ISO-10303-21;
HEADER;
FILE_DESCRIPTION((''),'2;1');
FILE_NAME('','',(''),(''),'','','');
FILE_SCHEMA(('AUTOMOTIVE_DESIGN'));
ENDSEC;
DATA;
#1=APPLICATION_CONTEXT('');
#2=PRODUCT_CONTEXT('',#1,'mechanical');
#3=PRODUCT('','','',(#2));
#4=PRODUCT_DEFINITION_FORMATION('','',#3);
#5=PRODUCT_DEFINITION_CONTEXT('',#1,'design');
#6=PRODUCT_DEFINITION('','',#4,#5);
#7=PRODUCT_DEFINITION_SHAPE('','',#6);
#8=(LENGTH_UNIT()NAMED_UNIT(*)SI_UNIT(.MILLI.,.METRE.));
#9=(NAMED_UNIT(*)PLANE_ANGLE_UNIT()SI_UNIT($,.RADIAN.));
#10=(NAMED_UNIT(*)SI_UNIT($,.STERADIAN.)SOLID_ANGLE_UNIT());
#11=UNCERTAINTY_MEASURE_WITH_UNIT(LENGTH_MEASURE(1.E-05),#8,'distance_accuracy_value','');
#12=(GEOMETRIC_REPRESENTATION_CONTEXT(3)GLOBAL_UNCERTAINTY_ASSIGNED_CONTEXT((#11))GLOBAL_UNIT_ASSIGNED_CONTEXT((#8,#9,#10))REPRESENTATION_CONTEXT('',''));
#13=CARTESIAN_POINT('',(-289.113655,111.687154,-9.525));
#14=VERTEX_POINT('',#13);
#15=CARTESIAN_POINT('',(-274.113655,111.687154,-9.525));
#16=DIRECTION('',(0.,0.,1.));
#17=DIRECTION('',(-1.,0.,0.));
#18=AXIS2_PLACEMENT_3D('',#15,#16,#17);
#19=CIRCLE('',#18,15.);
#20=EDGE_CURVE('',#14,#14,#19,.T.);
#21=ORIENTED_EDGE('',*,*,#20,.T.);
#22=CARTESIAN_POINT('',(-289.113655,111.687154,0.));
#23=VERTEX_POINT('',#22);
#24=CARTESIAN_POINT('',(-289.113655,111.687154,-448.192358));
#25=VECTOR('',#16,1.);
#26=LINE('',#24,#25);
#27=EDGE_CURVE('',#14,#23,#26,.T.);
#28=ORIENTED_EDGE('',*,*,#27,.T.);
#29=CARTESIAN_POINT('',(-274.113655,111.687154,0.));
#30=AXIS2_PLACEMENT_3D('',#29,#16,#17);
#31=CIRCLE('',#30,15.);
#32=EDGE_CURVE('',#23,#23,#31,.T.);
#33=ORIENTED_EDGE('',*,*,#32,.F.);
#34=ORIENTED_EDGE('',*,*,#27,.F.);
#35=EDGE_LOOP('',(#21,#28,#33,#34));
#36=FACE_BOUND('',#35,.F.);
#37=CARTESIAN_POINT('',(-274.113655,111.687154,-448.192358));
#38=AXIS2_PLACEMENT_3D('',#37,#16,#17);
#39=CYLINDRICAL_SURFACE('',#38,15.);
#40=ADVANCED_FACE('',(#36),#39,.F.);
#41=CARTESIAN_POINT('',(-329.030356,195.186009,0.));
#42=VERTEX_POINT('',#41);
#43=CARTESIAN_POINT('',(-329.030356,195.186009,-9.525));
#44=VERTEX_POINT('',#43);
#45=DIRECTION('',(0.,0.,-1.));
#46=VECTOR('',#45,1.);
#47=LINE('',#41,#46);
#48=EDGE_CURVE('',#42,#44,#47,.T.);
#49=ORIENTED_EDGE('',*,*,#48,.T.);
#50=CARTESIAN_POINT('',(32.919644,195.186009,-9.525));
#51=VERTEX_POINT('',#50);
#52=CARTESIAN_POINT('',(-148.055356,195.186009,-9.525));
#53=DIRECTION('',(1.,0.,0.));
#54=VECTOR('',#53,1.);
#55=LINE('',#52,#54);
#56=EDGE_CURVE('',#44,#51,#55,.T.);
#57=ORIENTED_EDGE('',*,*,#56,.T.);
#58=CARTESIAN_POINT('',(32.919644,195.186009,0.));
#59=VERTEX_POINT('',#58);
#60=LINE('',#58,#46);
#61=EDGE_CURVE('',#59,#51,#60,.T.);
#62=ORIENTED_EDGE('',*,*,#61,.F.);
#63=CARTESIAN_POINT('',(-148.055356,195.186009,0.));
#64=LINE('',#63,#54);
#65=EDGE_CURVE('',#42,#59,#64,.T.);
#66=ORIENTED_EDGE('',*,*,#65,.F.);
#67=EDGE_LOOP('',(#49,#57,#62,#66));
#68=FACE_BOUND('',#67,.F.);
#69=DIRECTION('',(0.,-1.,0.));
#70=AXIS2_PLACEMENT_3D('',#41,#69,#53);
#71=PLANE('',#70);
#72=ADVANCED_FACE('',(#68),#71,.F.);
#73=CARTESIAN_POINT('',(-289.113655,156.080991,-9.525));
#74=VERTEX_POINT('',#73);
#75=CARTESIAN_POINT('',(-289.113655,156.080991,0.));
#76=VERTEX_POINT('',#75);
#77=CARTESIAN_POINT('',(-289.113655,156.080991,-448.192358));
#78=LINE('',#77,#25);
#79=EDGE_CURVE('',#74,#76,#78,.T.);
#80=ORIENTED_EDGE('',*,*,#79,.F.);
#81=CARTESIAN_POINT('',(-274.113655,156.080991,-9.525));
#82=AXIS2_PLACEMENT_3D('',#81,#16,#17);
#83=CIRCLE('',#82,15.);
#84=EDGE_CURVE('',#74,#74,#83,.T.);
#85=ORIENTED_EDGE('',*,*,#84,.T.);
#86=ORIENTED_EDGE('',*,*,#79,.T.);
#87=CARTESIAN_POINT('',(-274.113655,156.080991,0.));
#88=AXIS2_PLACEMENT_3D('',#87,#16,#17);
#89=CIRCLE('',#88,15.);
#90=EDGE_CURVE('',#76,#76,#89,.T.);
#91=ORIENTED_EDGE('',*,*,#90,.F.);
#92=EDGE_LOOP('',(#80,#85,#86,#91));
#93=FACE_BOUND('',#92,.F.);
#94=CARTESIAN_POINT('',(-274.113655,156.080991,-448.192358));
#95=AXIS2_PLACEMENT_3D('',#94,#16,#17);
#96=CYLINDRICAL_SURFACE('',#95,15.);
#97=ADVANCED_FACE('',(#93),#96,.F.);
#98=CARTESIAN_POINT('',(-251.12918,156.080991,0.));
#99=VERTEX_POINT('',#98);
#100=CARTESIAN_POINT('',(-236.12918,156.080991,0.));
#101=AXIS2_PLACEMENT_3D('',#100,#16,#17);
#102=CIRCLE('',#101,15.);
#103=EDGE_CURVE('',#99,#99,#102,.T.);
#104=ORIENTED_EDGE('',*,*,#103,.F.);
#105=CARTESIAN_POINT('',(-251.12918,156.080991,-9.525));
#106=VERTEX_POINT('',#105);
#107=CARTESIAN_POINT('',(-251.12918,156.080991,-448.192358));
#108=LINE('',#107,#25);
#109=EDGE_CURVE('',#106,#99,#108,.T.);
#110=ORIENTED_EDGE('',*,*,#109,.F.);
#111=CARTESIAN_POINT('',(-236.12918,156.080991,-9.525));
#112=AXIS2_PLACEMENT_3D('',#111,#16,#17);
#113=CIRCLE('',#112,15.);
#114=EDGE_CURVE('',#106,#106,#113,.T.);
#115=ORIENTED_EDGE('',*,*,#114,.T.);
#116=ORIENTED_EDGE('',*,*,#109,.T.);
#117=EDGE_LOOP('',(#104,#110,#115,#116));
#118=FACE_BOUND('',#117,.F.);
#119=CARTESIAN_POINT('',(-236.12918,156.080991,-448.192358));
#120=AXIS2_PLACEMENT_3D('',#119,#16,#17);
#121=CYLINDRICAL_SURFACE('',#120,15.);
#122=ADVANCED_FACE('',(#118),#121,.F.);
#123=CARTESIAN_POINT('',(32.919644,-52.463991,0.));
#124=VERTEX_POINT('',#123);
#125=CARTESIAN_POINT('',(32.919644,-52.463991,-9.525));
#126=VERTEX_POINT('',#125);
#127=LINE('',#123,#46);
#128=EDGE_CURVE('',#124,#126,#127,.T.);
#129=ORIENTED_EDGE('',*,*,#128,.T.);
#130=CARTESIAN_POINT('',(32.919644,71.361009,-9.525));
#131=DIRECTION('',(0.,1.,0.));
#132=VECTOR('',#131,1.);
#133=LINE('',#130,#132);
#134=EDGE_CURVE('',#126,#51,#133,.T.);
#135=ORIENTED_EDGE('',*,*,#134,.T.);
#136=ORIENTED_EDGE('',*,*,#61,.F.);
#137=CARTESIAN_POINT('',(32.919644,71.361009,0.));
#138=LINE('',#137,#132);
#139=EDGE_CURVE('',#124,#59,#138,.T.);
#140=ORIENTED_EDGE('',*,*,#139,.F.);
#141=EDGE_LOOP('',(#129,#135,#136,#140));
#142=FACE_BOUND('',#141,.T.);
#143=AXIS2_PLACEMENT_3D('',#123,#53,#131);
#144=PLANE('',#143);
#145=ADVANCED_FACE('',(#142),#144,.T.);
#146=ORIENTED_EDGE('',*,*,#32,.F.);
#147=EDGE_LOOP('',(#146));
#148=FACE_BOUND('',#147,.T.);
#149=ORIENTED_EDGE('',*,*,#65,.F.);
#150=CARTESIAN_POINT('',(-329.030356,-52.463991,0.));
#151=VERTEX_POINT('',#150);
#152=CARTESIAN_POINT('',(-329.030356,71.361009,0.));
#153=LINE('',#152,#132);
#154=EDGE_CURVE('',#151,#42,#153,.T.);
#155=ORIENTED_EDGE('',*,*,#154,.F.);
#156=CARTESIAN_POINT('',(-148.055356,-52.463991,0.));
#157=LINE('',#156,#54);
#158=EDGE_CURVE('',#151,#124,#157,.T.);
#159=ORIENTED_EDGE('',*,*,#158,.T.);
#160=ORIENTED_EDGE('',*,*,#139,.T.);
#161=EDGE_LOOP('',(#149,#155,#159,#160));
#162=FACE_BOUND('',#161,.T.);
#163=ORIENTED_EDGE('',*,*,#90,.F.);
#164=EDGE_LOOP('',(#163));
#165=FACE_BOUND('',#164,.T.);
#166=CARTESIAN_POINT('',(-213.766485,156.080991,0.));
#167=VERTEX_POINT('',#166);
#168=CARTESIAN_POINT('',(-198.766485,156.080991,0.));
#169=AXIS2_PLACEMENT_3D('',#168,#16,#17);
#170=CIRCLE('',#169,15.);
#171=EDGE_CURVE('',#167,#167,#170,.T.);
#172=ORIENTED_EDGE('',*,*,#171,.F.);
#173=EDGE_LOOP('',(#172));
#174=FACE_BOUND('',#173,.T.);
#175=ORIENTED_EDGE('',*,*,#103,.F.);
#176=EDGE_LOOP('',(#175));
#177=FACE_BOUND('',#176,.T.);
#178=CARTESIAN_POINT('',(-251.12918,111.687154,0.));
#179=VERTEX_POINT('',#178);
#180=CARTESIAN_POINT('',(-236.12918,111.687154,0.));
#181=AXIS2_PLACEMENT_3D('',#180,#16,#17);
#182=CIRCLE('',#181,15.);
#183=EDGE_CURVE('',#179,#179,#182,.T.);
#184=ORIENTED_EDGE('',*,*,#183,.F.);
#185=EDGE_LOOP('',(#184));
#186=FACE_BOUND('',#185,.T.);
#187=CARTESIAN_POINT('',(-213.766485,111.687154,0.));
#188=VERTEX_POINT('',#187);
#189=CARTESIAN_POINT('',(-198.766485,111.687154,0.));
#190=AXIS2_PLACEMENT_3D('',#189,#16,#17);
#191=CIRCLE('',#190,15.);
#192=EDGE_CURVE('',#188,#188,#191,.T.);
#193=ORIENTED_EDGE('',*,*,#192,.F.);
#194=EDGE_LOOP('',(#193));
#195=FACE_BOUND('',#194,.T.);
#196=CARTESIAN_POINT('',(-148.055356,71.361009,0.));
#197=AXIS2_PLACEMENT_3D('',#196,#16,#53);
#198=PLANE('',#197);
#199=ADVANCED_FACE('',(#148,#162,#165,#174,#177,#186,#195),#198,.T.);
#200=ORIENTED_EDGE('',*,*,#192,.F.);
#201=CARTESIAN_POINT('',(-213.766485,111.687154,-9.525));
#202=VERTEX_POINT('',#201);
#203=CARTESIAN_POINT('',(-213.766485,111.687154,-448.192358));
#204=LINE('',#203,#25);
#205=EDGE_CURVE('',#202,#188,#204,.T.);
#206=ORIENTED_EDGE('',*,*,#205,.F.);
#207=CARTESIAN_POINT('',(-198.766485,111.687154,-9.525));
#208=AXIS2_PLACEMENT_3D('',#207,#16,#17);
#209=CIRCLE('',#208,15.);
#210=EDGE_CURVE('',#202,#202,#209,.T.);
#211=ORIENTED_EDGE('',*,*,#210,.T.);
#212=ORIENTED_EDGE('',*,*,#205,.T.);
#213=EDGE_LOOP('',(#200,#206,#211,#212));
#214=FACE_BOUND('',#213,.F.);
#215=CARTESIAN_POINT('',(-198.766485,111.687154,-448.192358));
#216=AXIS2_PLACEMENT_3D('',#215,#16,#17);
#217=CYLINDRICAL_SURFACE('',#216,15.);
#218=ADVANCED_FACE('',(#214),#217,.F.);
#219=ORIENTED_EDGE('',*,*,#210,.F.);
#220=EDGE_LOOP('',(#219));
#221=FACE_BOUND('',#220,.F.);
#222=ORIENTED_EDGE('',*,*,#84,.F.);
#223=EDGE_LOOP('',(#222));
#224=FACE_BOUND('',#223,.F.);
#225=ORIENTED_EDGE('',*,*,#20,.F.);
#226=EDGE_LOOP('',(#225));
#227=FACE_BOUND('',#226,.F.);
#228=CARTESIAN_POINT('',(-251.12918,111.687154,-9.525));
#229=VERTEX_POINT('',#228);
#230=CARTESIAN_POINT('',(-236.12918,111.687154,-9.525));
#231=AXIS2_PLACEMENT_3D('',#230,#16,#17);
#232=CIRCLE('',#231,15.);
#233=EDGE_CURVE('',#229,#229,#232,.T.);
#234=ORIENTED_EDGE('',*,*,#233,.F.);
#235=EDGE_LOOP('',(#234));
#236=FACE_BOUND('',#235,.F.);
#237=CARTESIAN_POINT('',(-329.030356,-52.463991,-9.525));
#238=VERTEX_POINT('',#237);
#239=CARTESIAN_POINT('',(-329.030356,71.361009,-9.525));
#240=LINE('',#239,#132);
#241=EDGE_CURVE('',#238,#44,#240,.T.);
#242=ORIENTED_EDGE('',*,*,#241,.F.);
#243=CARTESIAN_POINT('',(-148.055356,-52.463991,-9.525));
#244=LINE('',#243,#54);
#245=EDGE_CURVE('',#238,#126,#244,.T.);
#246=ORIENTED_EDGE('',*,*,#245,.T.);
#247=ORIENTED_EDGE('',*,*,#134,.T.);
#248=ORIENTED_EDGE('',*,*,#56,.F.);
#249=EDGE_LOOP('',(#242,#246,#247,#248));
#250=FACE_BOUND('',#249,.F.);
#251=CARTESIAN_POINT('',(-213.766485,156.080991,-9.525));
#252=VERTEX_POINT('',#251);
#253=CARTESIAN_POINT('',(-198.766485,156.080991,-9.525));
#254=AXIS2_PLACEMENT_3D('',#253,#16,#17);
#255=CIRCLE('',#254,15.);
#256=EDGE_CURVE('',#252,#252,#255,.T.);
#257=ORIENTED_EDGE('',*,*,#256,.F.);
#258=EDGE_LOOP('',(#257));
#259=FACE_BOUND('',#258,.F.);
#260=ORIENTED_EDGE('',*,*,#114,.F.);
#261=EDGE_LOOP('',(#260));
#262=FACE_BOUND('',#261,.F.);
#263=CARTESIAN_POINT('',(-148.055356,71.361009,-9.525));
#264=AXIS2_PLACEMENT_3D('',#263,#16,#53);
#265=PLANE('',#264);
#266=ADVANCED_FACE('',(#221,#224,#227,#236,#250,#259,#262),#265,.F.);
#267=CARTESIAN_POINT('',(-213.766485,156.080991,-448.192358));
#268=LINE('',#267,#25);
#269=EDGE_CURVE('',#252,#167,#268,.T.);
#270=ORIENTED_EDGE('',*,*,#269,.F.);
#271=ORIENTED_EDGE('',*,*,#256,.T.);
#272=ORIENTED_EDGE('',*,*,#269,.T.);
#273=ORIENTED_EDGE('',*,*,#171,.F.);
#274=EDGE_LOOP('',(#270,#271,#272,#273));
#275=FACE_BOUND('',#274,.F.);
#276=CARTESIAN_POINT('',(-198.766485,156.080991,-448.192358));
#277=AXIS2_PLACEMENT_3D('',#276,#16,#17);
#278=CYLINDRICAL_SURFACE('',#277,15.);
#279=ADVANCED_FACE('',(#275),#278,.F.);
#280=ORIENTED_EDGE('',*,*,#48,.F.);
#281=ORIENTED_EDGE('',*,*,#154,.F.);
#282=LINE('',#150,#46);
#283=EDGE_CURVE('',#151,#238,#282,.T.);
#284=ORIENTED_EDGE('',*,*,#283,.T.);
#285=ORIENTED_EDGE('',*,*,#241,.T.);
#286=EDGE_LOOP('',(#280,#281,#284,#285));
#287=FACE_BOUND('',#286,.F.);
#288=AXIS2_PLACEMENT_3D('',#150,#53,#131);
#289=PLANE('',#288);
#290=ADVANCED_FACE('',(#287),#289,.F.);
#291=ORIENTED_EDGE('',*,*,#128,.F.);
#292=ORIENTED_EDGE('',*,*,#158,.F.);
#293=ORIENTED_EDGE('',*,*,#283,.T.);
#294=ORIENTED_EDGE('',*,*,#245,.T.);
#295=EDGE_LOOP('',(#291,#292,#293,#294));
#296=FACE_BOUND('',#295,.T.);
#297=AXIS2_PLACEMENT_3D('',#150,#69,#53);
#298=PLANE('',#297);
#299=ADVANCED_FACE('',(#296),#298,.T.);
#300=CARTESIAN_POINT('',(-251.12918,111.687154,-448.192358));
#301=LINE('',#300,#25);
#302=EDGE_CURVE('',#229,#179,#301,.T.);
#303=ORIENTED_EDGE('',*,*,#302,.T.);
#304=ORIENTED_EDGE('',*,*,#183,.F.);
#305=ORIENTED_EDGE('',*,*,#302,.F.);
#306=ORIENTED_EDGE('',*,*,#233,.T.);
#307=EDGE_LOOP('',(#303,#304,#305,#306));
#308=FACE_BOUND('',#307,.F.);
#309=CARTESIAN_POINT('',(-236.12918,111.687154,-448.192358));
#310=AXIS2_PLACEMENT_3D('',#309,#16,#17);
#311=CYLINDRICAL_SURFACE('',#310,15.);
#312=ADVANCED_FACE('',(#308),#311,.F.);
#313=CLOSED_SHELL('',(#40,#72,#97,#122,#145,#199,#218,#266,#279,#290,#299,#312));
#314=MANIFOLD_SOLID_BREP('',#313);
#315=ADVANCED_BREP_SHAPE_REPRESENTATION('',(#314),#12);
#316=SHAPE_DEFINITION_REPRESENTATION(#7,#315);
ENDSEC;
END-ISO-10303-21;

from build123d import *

# Parameters (mm, degrees)
F0_W     = 361.95
F0_H     = 247.65
F1_DEPTH = 9.525
F3_D     = 30


# Not quite as in the source:
# - a feature names something its author has since deleted; it is built from what else it names


with BuildPart() as f1:
    # F0 (on Top) → F1 (new body)
    with BuildSketch(Plane.XY):
        with Locations((-148.0553561452, 71.3610090315)):
            Rectangle(F0_W, F0_H)
    extrude(amount=-F1_DEPTH)

    # F3 (through all)
    with Locations(Plane(origin=(0, 0, -9.525), x_dir=(1, 0, 0), z_dir=(0, 0, -1))):
        with Locations((-236.1291795969, -111.6871535778), (-236.1291795969, -156.0809910297), (-198.7664848566, -111.6871535778), (-274.1136550903, -156.0809910297), (-198.7664848566, -156.0809910297), (-274.1136550903, -111.6871535778)):
            Hole(F3_D / 2)


solid = f1.part
